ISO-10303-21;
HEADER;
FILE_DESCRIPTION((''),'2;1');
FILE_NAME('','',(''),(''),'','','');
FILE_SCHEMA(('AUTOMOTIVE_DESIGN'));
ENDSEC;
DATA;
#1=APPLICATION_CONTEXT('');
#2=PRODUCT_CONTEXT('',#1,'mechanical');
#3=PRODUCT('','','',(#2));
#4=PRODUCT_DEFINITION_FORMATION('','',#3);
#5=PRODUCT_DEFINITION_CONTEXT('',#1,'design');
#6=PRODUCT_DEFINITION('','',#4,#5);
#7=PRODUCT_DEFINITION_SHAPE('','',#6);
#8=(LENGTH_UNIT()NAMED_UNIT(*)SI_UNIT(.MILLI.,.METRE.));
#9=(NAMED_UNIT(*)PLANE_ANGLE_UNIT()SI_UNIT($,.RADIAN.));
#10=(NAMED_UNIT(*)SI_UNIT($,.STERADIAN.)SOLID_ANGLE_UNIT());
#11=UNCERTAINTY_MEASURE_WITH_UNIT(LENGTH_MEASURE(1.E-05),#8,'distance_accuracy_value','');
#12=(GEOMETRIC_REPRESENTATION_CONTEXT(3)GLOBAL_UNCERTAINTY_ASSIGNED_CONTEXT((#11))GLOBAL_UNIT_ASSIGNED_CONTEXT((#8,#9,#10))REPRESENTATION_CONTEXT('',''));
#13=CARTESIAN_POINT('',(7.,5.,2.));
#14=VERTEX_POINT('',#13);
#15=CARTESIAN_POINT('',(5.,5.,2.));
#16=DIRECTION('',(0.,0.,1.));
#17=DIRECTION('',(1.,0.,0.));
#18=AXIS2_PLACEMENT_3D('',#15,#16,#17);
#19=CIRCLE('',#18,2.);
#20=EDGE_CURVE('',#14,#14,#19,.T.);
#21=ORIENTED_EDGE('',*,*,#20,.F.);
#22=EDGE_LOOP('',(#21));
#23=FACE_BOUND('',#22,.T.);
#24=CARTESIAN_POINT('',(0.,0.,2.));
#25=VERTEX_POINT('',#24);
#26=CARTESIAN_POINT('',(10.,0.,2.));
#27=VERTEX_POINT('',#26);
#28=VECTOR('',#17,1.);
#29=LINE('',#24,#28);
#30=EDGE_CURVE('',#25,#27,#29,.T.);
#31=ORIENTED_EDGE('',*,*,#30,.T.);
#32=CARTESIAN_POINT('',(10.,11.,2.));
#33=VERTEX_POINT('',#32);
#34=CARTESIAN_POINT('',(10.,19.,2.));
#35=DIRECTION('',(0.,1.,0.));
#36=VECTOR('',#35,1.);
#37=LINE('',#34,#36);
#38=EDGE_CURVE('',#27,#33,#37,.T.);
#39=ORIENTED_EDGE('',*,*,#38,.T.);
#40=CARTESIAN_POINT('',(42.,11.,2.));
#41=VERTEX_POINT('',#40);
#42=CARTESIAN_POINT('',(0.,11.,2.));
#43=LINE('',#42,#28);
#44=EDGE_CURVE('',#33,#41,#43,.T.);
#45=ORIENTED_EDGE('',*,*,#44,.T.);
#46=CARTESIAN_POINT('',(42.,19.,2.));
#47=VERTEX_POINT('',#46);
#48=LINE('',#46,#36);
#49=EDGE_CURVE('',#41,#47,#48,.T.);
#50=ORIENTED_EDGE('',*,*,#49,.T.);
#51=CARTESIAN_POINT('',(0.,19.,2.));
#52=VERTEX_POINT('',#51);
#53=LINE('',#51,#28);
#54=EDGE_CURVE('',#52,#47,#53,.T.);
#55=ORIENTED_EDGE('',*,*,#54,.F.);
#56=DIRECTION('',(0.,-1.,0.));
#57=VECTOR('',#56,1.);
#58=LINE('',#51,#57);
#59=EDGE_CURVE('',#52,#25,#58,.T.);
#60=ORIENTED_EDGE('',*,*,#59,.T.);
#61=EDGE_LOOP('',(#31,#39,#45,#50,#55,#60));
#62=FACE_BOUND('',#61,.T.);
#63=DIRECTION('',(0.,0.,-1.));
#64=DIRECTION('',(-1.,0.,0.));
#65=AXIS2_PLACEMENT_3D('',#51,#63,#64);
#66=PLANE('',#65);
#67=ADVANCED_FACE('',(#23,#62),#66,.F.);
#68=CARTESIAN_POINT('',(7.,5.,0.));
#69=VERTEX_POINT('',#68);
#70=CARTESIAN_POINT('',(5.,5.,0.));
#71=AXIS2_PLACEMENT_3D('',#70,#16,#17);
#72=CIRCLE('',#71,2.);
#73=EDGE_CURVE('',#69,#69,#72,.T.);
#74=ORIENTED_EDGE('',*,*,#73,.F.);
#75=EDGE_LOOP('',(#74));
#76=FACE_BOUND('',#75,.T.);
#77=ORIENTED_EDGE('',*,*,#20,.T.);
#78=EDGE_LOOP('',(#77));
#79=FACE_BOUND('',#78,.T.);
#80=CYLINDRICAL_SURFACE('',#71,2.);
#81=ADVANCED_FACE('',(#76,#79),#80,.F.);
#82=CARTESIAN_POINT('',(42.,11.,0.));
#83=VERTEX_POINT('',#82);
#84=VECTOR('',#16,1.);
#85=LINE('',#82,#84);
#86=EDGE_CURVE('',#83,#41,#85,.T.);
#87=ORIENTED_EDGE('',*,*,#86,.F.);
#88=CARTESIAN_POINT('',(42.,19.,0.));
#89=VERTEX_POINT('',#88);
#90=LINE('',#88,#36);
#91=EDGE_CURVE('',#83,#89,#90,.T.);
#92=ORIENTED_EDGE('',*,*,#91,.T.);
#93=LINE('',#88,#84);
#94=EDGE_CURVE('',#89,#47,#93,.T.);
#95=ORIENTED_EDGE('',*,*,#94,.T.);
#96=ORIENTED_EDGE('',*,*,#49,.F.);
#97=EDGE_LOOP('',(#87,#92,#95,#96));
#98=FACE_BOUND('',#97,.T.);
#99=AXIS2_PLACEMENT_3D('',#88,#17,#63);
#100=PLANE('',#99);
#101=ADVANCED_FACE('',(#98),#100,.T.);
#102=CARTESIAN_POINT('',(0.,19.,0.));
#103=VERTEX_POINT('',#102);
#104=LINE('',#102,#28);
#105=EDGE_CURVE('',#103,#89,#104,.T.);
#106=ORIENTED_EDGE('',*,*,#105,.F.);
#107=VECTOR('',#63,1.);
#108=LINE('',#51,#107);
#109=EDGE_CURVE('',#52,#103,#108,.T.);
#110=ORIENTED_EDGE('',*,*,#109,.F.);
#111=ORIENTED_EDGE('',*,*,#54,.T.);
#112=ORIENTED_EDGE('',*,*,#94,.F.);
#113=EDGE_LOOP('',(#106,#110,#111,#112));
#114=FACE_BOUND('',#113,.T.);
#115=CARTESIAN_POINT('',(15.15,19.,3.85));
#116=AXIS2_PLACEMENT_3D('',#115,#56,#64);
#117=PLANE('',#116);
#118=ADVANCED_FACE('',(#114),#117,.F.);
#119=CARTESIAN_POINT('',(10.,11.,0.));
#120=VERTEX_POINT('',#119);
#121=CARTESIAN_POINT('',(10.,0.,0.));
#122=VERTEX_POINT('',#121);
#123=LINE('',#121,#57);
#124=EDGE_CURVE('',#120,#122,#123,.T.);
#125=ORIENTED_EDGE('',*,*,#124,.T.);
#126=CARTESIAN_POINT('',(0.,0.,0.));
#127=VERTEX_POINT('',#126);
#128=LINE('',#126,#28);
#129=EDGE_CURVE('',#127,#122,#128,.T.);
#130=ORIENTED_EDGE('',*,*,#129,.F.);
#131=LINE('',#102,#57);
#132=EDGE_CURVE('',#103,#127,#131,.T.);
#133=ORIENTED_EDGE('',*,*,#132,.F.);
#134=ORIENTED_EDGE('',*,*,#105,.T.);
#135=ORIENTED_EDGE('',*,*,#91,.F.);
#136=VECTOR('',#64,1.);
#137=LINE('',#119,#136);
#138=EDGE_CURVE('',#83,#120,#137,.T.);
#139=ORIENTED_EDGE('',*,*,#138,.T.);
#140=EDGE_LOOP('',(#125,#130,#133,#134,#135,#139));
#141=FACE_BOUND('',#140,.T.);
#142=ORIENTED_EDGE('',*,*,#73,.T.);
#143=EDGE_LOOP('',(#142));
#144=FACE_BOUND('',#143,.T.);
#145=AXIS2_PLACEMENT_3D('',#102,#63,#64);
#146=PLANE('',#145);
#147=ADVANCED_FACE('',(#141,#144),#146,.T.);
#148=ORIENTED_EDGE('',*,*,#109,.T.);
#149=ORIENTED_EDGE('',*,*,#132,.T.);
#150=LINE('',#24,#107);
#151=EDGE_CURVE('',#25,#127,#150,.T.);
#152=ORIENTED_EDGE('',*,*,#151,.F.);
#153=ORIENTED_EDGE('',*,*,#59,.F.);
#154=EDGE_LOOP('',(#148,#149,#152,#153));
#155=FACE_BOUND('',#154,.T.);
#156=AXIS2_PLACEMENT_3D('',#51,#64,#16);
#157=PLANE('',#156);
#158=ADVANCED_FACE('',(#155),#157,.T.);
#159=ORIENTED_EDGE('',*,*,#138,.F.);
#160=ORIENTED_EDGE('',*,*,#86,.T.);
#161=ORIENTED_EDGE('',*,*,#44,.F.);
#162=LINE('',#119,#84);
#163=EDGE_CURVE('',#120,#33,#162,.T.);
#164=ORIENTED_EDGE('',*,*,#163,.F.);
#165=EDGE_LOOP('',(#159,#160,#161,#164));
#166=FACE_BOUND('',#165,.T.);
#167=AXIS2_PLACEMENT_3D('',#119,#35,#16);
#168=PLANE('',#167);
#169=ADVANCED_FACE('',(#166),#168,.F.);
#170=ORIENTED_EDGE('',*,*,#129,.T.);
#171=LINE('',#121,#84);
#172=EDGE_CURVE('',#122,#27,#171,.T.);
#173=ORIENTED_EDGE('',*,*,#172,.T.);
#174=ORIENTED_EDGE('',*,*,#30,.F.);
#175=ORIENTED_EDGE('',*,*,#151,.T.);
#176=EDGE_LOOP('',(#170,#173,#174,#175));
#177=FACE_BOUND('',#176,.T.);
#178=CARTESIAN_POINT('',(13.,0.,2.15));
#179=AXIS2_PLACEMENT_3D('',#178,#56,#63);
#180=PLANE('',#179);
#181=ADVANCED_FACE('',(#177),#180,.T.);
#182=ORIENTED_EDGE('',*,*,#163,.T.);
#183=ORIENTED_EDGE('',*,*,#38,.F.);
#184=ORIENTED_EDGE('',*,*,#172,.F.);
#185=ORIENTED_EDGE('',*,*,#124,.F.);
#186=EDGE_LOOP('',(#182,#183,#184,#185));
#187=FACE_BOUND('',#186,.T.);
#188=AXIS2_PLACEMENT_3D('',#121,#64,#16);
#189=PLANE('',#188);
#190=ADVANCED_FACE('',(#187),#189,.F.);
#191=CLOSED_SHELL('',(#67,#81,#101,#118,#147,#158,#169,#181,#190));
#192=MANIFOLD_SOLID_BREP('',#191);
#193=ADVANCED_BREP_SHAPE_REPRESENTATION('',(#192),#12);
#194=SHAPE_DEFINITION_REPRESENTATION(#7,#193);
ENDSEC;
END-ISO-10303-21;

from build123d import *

# Parameters (mm, degrees)
BASE_FLANGE1_DEPTH      = 19
CUT_EXTRUDE1_DEPTH      = 47.270941205
CUT_EXTRUDE1_DEPTH_BACK = 47.270941205
SKETCH5_W               = 32
SKETCH5_H               = 11
SKETCH6_R               = 2
CUT_EXTRUDE2_DEPTH      = 47.270941205
CUT_EXTRUDE4_DEPTH      = 47.270941205
CUT_EXTRUDE4_DEPTH_BACK = 47.270941205
SKETCH7_W               = 30.575
SKETCH7_H               = 8
SKETCH8_W               = 30.575
SKETCH8_H               = 8
TAB1_DEPTH              = 2


# Sheet-metal steps are written as plain solids
with BuildPart() as part:
    # Sketch2 → Base-Flange1 (new body)
    with BuildSketch(Plane(origin=(0, 0, 0), x_dir=(1, 0, 0), z_dir=(0, 1, 0))):
        with BuildLine():
            Line((0, 0), (12.85, 0))
            ThreePointArc((12.85, 0), (14.37027958, -0.62972042), (15, -2.15))
            Line((15, -2.15), (15, -3.85))
            ThreePointArc((15, -3.85), (15.043933983, -3.956066017), (15.15, -4))
            Line((15.15, -4), (42, -4))
            Line((42, -4), (42, -6))
            Line((42, -6), (15.15, -6))
            ThreePointArc((15.15, -6), (13.62972042, -5.37027958), (13, -3.85))
            Line((13, -3.85), (13, -2.15))
            ThreePointArc((13, -2.15), (12.956066017, -2.043933983), (12.85, -2))
            Line((12.85, -2), (0, -2))
            Line((0, -2), (0, 0))
        make_face()
    extrude(amount=BASE_FLANGE1_DEPTH)

    # Sketch5 → Cut-Extrude1 (cut, two sides: drawn at the far end of the back side and taken through both)
    with BuildSketch(Plane.XY.offset(2).offset(-CUT_EXTRUDE1_DEPTH_BACK)):
        with Locations((26, 5.5)):
            Rectangle(SKETCH5_W, SKETCH5_H)
    extrude(amount=CUT_EXTRUDE1_DEPTH + CUT_EXTRUDE1_DEPTH_BACK, mode=Mode.SUBTRACT)

    # Sketch6 → Cut-Extrude2 (cut, through all)
    with BuildSketch(Plane.XY.offset(2)):
        with Locations((5, 5)):
            Circle(SKETCH6_R)
    extrude(amount=-CUT_EXTRUDE2_DEPTH, mode=Mode.SUBTRACT)

    # Sketch7 → Cut-Extrude4 (cut, two sides: drawn at the far end of the back side and taken through both)
    with BuildSketch(Plane.XY.offset(2).offset(-CUT_EXTRUDE4_DEPTH_BACK)):
        with Locations((26.7125, 15)):
            Rectangle(SKETCH7_W, SKETCH7_H)
    extrude(amount=CUT_EXTRUDE4_DEPTH + CUT_EXTRUDE4_DEPTH_BACK, mode=Mode.SUBTRACT)

    # Sketch8 → Tab1 (add)
    with BuildSketch(Plane.XY.offset(2)):
        with Locations((26.7125, 15)):
            Rectangle(SKETCH8_W, SKETCH8_H)
    extrude(amount=-TAB1_DEPTH)


solid = part.part
